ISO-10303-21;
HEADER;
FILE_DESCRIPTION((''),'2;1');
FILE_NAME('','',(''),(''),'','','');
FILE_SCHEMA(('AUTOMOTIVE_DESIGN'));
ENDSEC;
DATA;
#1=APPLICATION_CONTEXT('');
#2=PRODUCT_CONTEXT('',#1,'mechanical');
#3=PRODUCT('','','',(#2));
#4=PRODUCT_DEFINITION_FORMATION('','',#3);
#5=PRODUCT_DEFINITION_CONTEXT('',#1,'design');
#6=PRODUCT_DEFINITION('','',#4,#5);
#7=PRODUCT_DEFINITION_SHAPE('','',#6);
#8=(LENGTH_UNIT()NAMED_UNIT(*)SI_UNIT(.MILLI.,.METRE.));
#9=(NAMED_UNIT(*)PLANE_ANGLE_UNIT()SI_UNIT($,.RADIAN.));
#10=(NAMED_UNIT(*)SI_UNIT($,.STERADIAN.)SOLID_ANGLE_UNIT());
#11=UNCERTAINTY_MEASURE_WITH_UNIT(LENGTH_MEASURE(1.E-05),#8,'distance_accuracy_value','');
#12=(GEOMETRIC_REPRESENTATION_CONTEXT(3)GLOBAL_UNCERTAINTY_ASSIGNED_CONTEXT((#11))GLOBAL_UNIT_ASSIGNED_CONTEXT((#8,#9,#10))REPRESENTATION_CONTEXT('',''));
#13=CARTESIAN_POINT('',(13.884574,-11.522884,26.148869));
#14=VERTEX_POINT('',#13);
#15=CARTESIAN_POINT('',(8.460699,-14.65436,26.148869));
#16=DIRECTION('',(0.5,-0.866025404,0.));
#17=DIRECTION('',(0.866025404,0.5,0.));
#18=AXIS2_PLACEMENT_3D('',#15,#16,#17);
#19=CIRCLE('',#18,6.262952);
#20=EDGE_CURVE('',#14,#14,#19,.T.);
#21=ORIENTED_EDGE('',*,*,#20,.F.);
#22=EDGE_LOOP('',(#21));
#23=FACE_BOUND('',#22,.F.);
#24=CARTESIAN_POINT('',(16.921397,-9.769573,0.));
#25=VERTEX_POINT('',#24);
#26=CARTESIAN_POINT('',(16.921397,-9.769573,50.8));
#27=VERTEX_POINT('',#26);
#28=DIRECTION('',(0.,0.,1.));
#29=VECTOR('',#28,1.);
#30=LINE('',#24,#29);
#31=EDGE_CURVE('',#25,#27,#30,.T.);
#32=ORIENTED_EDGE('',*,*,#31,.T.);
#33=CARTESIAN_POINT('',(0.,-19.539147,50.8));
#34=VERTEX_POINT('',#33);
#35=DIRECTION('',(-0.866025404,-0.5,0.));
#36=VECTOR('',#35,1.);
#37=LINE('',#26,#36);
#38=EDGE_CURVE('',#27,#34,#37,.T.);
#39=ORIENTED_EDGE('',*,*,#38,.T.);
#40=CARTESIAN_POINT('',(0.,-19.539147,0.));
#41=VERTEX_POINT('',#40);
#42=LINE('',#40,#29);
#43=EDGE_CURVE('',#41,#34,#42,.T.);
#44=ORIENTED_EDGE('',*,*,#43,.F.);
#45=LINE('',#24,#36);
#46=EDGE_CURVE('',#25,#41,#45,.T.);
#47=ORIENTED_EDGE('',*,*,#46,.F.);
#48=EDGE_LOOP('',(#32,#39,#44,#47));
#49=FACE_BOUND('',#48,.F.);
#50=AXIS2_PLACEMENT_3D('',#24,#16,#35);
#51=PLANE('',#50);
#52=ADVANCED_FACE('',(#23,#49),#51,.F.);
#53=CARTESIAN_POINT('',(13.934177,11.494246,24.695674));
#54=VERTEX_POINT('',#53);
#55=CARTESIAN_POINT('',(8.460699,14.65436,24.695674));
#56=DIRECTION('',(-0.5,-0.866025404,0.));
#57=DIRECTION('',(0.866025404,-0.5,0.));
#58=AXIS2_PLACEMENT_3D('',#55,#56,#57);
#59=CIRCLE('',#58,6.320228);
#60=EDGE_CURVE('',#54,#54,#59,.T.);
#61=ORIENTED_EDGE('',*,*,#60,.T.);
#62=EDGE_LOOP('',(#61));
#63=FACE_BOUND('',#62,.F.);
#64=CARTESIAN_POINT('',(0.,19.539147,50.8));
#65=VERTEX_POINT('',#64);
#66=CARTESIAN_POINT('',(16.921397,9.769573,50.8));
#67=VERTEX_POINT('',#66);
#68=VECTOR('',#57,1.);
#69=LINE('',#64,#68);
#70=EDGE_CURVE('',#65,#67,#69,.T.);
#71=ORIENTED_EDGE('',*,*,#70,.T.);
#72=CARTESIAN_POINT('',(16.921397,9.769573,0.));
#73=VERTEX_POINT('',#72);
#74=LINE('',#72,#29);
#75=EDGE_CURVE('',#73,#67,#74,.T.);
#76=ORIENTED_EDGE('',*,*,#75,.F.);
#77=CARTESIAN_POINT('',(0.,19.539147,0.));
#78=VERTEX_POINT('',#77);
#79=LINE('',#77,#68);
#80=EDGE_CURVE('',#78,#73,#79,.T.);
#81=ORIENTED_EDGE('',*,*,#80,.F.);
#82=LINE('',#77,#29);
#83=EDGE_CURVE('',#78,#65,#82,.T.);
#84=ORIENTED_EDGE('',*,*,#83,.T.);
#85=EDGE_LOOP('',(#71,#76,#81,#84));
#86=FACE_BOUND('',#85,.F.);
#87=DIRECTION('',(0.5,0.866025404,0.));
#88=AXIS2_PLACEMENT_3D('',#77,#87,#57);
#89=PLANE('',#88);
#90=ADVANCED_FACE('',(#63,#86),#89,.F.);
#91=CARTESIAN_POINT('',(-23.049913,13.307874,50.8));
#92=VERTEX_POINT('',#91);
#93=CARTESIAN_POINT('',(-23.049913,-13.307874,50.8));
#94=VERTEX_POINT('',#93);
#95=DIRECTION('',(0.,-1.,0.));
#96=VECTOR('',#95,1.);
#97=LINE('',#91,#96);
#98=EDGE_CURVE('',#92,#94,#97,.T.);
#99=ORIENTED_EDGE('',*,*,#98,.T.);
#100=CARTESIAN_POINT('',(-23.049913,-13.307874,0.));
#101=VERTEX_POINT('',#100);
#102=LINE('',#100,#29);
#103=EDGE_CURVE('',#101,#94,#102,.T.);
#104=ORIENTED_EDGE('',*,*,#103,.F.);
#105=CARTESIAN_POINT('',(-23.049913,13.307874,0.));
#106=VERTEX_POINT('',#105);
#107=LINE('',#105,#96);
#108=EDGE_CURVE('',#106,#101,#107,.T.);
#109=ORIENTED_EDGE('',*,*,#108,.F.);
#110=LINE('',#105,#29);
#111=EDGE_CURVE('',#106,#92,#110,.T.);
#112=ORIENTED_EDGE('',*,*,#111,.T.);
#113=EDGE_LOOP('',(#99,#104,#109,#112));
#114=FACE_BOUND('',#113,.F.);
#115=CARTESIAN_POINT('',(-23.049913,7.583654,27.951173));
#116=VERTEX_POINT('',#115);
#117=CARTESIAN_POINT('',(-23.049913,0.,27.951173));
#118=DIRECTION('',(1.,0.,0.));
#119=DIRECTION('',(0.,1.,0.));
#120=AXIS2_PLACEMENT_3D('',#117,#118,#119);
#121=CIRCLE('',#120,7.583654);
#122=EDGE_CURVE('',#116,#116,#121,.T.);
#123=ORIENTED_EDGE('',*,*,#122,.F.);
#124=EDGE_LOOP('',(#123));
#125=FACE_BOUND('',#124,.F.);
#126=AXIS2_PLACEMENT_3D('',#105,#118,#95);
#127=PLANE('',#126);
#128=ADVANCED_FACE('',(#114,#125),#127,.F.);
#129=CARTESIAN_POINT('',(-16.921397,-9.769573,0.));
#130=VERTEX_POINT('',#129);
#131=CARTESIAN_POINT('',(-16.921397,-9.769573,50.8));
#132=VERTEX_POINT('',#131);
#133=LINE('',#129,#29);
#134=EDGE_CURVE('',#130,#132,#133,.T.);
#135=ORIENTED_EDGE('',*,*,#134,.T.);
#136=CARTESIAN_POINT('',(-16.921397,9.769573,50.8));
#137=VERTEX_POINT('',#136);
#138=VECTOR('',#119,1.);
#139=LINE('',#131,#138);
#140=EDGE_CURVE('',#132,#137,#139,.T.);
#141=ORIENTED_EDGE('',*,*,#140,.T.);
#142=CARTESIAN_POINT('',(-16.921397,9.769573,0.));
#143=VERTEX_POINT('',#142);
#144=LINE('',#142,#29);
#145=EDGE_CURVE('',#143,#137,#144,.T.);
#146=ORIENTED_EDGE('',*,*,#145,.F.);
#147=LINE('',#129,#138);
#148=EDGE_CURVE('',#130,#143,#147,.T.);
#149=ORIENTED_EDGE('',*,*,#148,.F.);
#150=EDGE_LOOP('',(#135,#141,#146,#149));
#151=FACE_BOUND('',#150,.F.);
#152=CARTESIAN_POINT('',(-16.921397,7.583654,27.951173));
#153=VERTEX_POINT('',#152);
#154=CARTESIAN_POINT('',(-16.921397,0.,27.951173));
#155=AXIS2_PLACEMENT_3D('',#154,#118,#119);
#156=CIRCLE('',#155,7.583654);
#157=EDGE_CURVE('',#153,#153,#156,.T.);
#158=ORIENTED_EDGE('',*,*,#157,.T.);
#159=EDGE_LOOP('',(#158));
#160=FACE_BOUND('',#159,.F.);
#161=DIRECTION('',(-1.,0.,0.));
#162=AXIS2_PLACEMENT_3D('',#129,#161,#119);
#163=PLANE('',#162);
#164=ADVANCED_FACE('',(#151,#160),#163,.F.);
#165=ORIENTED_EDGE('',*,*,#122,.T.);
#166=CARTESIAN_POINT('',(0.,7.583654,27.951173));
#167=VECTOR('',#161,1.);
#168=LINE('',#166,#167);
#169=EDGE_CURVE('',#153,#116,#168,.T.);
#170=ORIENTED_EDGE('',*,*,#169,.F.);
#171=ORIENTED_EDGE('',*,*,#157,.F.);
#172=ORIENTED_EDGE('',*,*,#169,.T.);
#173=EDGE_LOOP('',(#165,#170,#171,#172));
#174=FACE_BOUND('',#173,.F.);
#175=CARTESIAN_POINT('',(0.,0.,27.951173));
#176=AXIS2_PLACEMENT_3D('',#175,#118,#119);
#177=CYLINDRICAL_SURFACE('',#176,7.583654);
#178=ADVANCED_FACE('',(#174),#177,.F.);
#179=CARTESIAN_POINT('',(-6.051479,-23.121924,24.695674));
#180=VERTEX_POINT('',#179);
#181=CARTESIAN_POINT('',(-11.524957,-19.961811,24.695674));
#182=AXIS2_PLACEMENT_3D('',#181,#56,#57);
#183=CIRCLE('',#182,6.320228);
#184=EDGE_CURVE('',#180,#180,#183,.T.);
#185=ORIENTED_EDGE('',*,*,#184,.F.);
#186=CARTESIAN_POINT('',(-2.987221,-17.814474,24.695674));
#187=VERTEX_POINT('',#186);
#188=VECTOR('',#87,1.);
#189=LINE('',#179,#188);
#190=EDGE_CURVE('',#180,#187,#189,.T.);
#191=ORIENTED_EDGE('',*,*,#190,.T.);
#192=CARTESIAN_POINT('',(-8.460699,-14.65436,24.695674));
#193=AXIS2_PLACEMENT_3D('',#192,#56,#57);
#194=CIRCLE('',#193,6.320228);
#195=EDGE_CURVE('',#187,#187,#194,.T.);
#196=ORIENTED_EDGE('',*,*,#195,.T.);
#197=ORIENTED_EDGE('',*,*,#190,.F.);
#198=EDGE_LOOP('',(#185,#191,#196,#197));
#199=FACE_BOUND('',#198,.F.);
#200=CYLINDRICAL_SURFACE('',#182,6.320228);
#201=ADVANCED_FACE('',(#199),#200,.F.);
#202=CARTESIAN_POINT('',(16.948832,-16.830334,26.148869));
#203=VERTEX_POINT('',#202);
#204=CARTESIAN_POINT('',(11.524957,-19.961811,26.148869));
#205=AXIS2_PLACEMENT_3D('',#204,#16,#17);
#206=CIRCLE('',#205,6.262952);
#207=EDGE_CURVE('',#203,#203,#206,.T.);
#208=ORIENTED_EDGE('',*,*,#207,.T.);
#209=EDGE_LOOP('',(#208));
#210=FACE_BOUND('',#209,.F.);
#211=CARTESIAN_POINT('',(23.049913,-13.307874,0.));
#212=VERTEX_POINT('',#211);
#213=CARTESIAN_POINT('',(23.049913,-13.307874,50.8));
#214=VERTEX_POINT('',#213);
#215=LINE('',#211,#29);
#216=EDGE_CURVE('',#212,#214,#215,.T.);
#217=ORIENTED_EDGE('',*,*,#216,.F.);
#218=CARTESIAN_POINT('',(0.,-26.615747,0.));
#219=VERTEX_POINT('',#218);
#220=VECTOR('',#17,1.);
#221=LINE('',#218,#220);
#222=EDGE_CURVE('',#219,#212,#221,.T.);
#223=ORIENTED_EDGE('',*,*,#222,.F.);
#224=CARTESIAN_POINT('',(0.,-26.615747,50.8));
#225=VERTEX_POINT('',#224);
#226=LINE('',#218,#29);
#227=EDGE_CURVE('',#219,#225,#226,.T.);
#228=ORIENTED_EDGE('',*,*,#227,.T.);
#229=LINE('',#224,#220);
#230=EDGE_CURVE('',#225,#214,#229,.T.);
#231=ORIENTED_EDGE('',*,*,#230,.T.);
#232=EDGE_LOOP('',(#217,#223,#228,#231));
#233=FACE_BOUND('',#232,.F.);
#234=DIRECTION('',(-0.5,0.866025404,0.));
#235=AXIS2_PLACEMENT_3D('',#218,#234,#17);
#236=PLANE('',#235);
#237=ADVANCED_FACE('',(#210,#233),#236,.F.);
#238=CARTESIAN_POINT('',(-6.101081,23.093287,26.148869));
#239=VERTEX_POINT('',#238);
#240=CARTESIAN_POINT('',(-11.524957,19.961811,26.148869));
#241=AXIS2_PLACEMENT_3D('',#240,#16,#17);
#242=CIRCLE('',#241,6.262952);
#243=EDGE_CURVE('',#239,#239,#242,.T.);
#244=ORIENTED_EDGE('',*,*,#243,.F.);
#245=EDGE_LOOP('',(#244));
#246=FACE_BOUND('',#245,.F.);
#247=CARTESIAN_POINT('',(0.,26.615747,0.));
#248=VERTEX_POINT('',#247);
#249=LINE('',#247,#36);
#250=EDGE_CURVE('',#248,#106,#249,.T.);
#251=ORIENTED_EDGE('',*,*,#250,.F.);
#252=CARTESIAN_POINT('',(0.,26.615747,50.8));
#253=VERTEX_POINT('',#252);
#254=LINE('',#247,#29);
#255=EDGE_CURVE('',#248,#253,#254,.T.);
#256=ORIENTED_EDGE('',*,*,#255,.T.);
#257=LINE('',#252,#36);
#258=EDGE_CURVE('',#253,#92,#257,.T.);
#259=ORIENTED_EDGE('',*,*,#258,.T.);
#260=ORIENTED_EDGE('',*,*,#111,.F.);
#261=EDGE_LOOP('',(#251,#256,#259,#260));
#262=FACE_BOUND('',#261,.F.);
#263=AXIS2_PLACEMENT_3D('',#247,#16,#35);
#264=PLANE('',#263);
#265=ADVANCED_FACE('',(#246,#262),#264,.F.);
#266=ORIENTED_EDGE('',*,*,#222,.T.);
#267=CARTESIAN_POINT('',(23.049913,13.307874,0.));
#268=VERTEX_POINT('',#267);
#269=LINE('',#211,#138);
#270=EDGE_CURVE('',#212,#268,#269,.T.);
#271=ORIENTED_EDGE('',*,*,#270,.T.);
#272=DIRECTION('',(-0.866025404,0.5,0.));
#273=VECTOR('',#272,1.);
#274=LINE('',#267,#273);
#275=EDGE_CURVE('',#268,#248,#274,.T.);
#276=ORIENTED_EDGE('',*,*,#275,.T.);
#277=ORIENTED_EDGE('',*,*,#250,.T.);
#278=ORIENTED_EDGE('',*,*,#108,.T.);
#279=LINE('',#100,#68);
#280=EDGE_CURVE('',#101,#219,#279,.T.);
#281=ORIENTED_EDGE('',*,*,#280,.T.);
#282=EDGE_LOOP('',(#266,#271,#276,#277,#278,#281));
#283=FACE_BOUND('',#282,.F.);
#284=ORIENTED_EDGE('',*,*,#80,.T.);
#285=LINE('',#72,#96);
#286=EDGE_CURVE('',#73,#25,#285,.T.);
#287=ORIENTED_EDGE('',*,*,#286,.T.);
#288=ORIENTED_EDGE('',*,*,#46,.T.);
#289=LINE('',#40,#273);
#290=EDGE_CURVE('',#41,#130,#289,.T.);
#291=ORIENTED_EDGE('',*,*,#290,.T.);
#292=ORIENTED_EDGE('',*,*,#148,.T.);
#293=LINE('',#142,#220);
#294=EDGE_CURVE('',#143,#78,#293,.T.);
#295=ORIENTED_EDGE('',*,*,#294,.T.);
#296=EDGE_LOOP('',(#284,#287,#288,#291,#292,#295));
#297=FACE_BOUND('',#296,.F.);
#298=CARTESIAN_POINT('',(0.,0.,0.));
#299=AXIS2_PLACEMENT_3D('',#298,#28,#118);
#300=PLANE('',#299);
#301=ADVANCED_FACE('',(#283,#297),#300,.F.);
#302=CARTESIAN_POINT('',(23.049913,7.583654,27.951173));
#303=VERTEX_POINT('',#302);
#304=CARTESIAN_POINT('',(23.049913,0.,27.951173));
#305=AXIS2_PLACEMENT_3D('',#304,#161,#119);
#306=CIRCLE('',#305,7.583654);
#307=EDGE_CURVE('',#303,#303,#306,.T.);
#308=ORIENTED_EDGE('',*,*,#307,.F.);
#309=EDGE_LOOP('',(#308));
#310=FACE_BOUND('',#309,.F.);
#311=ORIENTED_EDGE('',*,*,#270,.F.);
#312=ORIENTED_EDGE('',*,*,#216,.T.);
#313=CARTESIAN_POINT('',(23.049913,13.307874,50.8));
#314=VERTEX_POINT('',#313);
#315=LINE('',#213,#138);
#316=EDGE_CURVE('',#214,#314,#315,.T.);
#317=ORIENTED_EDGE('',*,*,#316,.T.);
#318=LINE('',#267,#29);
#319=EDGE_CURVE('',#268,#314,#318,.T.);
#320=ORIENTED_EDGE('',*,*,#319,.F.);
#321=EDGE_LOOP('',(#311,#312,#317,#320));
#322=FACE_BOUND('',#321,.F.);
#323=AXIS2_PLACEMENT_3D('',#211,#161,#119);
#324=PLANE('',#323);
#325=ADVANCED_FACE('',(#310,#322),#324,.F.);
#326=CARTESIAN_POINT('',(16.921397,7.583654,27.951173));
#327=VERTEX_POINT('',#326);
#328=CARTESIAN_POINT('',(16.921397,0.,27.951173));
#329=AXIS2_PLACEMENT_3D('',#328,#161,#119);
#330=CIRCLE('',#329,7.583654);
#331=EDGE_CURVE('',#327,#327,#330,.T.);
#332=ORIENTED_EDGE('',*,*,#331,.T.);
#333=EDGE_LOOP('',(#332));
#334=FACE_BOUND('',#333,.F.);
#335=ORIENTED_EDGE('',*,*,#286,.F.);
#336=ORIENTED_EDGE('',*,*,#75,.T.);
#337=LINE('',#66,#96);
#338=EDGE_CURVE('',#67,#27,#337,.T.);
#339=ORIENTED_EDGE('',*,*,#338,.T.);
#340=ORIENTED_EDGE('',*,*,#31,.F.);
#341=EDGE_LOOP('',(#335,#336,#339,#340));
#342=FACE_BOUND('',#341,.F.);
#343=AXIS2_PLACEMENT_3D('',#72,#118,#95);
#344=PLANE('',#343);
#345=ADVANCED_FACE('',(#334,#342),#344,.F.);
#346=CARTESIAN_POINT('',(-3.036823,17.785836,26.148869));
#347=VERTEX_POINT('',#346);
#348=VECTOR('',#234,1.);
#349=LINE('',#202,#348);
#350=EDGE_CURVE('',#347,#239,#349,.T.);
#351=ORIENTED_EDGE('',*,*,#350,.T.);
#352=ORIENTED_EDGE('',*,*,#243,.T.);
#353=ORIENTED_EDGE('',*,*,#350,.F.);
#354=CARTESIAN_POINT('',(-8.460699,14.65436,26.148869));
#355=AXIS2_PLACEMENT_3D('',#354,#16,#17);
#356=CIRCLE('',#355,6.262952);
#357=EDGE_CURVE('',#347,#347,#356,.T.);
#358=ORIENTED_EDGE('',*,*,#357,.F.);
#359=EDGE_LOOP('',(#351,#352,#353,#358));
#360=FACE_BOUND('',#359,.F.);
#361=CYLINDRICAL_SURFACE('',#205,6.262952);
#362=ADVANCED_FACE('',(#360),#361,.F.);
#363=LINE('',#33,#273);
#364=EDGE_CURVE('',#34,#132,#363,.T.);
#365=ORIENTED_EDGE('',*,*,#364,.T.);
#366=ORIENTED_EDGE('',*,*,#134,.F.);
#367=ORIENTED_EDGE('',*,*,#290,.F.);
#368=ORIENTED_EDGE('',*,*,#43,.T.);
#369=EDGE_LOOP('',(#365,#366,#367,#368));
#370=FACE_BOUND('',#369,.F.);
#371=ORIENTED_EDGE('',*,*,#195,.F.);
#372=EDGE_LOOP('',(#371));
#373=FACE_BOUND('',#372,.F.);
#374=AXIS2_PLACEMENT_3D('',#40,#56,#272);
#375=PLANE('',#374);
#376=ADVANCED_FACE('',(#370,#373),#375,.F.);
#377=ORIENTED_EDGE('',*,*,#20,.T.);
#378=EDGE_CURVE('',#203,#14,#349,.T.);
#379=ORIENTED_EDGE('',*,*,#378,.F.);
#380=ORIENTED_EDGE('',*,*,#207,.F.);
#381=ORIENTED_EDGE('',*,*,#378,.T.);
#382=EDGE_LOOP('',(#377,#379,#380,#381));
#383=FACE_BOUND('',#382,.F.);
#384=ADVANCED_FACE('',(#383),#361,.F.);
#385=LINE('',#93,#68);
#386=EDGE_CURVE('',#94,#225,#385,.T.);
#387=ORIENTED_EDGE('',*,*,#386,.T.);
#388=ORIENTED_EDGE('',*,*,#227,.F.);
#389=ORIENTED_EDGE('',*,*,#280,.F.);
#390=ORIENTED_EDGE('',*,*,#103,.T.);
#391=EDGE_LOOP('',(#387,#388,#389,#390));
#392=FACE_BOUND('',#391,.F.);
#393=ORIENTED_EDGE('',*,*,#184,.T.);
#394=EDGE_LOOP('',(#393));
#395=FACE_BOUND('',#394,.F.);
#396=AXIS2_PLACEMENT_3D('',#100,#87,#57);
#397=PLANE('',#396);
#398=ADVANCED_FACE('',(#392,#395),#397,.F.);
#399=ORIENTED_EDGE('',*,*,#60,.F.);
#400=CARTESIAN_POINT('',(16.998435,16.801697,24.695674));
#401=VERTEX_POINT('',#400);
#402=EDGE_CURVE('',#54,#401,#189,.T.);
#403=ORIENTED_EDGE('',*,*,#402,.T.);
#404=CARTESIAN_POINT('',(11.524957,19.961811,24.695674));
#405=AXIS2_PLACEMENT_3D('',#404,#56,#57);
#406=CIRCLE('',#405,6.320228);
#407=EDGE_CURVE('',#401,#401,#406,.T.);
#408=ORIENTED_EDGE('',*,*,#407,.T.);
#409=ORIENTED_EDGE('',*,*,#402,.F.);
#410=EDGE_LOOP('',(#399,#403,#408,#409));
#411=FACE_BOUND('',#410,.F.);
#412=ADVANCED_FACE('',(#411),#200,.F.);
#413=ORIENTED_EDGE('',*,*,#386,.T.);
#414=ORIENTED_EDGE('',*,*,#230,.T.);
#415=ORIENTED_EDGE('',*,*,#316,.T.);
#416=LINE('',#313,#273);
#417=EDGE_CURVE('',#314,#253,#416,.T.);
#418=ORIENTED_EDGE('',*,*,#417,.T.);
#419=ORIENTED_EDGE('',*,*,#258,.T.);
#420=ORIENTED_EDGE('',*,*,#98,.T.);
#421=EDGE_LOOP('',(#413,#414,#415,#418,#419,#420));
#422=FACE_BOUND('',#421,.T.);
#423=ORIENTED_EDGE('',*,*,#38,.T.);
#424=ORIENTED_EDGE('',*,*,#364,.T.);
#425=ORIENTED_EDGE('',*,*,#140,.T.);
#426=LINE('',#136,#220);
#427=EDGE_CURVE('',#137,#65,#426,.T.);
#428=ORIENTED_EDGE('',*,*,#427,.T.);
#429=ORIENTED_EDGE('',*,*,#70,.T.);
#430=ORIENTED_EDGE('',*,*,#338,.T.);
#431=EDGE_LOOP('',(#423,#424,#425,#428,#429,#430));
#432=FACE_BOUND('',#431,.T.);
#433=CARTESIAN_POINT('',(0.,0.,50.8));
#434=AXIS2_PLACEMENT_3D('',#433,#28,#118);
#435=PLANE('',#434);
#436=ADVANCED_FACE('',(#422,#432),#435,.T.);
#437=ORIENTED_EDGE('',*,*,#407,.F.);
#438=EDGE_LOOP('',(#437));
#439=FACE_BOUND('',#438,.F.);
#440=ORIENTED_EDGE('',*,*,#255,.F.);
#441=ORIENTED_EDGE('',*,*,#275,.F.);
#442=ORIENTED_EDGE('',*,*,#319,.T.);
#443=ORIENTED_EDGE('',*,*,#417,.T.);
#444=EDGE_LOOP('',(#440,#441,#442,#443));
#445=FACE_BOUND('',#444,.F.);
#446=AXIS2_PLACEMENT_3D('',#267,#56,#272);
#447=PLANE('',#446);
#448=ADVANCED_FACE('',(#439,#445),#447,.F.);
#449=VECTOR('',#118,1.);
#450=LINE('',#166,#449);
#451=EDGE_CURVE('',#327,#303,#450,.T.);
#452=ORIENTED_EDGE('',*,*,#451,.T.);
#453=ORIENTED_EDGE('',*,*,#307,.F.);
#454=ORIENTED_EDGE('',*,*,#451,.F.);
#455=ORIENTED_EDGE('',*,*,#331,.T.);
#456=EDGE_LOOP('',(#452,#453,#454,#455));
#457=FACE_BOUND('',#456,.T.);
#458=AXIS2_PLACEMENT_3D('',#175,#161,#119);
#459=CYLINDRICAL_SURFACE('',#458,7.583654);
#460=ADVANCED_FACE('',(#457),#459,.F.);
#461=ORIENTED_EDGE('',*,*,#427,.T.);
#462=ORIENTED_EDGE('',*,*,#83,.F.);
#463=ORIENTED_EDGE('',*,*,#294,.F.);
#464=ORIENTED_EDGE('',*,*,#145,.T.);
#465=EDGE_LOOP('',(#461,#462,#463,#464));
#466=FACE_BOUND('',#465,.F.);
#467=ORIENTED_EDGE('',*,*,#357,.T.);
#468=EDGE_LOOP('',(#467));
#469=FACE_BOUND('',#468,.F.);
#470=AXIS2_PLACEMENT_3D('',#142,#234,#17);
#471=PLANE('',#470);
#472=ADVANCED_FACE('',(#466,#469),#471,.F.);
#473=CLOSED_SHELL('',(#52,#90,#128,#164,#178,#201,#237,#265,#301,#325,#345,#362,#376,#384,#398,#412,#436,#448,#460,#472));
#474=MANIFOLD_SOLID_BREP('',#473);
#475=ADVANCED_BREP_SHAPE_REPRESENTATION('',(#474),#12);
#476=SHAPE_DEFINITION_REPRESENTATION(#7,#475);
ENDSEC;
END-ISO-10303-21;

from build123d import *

# Parameters (mm, degrees)
F1_DEPTH = 50.8
F2_R     = 7.58365402
F3_DEPTH = 38.1
F4_DEPTH = 38.1
F5_R     = 6.3202279554
F6_DEPTH = 76.2
F7_R     = 6.2629522454
F8_DEPTH = 50.8


with BuildPart() as f1:
    # F0 (on Top) → F1 (new body)
    with BuildSketch(Plane.XY):
        Polygon((-23.0499133468, 13.3078736756), (-23.0499133468, -13.3078736756), (0, -26.6157473511), (23.0499133468, -13.3078736756), (23.0499133468, 13.3078736756), (0, 26.6157473511), align=None)
        Polygon((0, -19.5391465708), (-16.9213972986, -9.7695732854), (-16.9213972986, 9.7695732854), (0, 19.5391465708), (16.9213972986, 9.7695732854), (16.9213972986, -9.7695732854), align=None, mode=Mode.SUBTRACT)
    extrude(amount=F1_DEPTH)

    # F2 (on Right) → F3 (cut)
    with BuildSketch(Plane.YZ):
        with Locations((0, 27.9511734843)):
            Circle(F2_R)
    extrude(amount=F3_DEPTH, mode=Mode.SUBTRACT)

    # F2 (on Right) → F4 (cut)
    with BuildSketch(Plane.YZ):
        with Locations((0, 27.9511734843)):
            Circle(F2_R)
    extrude(amount=-F4_DEPTH, mode=Mode.SUBTRACT)

    # F5 (on face) → F6 (cut)
    with BuildSketch(Plane(origin=(-11.5249566734, -19.9618105133, 0), x_dir=(0.8660254038, -0.5, 0), z_dir=(-0.5, -0.8660254038, 0))):
        with Locations((0, 24.6956739575)):
            Circle(F5_R)
    extrude(amount=-F6_DEPTH, mode=Mode.SUBTRACT)

    # F7 (on face) → F8 (cut)
    with BuildSketch(Plane(origin=(11.5249566734, -19.9618105133, 0), x_dir=(0.8660254038, 0.5, 0), z_dir=(0.5, -0.8660254038, 0))):
        with Locations((0, 26.1488687247)):
            Circle(F7_R)
    extrude(amount=-F8_DEPTH, mode=Mode.SUBTRACT)


solid = f1.part
